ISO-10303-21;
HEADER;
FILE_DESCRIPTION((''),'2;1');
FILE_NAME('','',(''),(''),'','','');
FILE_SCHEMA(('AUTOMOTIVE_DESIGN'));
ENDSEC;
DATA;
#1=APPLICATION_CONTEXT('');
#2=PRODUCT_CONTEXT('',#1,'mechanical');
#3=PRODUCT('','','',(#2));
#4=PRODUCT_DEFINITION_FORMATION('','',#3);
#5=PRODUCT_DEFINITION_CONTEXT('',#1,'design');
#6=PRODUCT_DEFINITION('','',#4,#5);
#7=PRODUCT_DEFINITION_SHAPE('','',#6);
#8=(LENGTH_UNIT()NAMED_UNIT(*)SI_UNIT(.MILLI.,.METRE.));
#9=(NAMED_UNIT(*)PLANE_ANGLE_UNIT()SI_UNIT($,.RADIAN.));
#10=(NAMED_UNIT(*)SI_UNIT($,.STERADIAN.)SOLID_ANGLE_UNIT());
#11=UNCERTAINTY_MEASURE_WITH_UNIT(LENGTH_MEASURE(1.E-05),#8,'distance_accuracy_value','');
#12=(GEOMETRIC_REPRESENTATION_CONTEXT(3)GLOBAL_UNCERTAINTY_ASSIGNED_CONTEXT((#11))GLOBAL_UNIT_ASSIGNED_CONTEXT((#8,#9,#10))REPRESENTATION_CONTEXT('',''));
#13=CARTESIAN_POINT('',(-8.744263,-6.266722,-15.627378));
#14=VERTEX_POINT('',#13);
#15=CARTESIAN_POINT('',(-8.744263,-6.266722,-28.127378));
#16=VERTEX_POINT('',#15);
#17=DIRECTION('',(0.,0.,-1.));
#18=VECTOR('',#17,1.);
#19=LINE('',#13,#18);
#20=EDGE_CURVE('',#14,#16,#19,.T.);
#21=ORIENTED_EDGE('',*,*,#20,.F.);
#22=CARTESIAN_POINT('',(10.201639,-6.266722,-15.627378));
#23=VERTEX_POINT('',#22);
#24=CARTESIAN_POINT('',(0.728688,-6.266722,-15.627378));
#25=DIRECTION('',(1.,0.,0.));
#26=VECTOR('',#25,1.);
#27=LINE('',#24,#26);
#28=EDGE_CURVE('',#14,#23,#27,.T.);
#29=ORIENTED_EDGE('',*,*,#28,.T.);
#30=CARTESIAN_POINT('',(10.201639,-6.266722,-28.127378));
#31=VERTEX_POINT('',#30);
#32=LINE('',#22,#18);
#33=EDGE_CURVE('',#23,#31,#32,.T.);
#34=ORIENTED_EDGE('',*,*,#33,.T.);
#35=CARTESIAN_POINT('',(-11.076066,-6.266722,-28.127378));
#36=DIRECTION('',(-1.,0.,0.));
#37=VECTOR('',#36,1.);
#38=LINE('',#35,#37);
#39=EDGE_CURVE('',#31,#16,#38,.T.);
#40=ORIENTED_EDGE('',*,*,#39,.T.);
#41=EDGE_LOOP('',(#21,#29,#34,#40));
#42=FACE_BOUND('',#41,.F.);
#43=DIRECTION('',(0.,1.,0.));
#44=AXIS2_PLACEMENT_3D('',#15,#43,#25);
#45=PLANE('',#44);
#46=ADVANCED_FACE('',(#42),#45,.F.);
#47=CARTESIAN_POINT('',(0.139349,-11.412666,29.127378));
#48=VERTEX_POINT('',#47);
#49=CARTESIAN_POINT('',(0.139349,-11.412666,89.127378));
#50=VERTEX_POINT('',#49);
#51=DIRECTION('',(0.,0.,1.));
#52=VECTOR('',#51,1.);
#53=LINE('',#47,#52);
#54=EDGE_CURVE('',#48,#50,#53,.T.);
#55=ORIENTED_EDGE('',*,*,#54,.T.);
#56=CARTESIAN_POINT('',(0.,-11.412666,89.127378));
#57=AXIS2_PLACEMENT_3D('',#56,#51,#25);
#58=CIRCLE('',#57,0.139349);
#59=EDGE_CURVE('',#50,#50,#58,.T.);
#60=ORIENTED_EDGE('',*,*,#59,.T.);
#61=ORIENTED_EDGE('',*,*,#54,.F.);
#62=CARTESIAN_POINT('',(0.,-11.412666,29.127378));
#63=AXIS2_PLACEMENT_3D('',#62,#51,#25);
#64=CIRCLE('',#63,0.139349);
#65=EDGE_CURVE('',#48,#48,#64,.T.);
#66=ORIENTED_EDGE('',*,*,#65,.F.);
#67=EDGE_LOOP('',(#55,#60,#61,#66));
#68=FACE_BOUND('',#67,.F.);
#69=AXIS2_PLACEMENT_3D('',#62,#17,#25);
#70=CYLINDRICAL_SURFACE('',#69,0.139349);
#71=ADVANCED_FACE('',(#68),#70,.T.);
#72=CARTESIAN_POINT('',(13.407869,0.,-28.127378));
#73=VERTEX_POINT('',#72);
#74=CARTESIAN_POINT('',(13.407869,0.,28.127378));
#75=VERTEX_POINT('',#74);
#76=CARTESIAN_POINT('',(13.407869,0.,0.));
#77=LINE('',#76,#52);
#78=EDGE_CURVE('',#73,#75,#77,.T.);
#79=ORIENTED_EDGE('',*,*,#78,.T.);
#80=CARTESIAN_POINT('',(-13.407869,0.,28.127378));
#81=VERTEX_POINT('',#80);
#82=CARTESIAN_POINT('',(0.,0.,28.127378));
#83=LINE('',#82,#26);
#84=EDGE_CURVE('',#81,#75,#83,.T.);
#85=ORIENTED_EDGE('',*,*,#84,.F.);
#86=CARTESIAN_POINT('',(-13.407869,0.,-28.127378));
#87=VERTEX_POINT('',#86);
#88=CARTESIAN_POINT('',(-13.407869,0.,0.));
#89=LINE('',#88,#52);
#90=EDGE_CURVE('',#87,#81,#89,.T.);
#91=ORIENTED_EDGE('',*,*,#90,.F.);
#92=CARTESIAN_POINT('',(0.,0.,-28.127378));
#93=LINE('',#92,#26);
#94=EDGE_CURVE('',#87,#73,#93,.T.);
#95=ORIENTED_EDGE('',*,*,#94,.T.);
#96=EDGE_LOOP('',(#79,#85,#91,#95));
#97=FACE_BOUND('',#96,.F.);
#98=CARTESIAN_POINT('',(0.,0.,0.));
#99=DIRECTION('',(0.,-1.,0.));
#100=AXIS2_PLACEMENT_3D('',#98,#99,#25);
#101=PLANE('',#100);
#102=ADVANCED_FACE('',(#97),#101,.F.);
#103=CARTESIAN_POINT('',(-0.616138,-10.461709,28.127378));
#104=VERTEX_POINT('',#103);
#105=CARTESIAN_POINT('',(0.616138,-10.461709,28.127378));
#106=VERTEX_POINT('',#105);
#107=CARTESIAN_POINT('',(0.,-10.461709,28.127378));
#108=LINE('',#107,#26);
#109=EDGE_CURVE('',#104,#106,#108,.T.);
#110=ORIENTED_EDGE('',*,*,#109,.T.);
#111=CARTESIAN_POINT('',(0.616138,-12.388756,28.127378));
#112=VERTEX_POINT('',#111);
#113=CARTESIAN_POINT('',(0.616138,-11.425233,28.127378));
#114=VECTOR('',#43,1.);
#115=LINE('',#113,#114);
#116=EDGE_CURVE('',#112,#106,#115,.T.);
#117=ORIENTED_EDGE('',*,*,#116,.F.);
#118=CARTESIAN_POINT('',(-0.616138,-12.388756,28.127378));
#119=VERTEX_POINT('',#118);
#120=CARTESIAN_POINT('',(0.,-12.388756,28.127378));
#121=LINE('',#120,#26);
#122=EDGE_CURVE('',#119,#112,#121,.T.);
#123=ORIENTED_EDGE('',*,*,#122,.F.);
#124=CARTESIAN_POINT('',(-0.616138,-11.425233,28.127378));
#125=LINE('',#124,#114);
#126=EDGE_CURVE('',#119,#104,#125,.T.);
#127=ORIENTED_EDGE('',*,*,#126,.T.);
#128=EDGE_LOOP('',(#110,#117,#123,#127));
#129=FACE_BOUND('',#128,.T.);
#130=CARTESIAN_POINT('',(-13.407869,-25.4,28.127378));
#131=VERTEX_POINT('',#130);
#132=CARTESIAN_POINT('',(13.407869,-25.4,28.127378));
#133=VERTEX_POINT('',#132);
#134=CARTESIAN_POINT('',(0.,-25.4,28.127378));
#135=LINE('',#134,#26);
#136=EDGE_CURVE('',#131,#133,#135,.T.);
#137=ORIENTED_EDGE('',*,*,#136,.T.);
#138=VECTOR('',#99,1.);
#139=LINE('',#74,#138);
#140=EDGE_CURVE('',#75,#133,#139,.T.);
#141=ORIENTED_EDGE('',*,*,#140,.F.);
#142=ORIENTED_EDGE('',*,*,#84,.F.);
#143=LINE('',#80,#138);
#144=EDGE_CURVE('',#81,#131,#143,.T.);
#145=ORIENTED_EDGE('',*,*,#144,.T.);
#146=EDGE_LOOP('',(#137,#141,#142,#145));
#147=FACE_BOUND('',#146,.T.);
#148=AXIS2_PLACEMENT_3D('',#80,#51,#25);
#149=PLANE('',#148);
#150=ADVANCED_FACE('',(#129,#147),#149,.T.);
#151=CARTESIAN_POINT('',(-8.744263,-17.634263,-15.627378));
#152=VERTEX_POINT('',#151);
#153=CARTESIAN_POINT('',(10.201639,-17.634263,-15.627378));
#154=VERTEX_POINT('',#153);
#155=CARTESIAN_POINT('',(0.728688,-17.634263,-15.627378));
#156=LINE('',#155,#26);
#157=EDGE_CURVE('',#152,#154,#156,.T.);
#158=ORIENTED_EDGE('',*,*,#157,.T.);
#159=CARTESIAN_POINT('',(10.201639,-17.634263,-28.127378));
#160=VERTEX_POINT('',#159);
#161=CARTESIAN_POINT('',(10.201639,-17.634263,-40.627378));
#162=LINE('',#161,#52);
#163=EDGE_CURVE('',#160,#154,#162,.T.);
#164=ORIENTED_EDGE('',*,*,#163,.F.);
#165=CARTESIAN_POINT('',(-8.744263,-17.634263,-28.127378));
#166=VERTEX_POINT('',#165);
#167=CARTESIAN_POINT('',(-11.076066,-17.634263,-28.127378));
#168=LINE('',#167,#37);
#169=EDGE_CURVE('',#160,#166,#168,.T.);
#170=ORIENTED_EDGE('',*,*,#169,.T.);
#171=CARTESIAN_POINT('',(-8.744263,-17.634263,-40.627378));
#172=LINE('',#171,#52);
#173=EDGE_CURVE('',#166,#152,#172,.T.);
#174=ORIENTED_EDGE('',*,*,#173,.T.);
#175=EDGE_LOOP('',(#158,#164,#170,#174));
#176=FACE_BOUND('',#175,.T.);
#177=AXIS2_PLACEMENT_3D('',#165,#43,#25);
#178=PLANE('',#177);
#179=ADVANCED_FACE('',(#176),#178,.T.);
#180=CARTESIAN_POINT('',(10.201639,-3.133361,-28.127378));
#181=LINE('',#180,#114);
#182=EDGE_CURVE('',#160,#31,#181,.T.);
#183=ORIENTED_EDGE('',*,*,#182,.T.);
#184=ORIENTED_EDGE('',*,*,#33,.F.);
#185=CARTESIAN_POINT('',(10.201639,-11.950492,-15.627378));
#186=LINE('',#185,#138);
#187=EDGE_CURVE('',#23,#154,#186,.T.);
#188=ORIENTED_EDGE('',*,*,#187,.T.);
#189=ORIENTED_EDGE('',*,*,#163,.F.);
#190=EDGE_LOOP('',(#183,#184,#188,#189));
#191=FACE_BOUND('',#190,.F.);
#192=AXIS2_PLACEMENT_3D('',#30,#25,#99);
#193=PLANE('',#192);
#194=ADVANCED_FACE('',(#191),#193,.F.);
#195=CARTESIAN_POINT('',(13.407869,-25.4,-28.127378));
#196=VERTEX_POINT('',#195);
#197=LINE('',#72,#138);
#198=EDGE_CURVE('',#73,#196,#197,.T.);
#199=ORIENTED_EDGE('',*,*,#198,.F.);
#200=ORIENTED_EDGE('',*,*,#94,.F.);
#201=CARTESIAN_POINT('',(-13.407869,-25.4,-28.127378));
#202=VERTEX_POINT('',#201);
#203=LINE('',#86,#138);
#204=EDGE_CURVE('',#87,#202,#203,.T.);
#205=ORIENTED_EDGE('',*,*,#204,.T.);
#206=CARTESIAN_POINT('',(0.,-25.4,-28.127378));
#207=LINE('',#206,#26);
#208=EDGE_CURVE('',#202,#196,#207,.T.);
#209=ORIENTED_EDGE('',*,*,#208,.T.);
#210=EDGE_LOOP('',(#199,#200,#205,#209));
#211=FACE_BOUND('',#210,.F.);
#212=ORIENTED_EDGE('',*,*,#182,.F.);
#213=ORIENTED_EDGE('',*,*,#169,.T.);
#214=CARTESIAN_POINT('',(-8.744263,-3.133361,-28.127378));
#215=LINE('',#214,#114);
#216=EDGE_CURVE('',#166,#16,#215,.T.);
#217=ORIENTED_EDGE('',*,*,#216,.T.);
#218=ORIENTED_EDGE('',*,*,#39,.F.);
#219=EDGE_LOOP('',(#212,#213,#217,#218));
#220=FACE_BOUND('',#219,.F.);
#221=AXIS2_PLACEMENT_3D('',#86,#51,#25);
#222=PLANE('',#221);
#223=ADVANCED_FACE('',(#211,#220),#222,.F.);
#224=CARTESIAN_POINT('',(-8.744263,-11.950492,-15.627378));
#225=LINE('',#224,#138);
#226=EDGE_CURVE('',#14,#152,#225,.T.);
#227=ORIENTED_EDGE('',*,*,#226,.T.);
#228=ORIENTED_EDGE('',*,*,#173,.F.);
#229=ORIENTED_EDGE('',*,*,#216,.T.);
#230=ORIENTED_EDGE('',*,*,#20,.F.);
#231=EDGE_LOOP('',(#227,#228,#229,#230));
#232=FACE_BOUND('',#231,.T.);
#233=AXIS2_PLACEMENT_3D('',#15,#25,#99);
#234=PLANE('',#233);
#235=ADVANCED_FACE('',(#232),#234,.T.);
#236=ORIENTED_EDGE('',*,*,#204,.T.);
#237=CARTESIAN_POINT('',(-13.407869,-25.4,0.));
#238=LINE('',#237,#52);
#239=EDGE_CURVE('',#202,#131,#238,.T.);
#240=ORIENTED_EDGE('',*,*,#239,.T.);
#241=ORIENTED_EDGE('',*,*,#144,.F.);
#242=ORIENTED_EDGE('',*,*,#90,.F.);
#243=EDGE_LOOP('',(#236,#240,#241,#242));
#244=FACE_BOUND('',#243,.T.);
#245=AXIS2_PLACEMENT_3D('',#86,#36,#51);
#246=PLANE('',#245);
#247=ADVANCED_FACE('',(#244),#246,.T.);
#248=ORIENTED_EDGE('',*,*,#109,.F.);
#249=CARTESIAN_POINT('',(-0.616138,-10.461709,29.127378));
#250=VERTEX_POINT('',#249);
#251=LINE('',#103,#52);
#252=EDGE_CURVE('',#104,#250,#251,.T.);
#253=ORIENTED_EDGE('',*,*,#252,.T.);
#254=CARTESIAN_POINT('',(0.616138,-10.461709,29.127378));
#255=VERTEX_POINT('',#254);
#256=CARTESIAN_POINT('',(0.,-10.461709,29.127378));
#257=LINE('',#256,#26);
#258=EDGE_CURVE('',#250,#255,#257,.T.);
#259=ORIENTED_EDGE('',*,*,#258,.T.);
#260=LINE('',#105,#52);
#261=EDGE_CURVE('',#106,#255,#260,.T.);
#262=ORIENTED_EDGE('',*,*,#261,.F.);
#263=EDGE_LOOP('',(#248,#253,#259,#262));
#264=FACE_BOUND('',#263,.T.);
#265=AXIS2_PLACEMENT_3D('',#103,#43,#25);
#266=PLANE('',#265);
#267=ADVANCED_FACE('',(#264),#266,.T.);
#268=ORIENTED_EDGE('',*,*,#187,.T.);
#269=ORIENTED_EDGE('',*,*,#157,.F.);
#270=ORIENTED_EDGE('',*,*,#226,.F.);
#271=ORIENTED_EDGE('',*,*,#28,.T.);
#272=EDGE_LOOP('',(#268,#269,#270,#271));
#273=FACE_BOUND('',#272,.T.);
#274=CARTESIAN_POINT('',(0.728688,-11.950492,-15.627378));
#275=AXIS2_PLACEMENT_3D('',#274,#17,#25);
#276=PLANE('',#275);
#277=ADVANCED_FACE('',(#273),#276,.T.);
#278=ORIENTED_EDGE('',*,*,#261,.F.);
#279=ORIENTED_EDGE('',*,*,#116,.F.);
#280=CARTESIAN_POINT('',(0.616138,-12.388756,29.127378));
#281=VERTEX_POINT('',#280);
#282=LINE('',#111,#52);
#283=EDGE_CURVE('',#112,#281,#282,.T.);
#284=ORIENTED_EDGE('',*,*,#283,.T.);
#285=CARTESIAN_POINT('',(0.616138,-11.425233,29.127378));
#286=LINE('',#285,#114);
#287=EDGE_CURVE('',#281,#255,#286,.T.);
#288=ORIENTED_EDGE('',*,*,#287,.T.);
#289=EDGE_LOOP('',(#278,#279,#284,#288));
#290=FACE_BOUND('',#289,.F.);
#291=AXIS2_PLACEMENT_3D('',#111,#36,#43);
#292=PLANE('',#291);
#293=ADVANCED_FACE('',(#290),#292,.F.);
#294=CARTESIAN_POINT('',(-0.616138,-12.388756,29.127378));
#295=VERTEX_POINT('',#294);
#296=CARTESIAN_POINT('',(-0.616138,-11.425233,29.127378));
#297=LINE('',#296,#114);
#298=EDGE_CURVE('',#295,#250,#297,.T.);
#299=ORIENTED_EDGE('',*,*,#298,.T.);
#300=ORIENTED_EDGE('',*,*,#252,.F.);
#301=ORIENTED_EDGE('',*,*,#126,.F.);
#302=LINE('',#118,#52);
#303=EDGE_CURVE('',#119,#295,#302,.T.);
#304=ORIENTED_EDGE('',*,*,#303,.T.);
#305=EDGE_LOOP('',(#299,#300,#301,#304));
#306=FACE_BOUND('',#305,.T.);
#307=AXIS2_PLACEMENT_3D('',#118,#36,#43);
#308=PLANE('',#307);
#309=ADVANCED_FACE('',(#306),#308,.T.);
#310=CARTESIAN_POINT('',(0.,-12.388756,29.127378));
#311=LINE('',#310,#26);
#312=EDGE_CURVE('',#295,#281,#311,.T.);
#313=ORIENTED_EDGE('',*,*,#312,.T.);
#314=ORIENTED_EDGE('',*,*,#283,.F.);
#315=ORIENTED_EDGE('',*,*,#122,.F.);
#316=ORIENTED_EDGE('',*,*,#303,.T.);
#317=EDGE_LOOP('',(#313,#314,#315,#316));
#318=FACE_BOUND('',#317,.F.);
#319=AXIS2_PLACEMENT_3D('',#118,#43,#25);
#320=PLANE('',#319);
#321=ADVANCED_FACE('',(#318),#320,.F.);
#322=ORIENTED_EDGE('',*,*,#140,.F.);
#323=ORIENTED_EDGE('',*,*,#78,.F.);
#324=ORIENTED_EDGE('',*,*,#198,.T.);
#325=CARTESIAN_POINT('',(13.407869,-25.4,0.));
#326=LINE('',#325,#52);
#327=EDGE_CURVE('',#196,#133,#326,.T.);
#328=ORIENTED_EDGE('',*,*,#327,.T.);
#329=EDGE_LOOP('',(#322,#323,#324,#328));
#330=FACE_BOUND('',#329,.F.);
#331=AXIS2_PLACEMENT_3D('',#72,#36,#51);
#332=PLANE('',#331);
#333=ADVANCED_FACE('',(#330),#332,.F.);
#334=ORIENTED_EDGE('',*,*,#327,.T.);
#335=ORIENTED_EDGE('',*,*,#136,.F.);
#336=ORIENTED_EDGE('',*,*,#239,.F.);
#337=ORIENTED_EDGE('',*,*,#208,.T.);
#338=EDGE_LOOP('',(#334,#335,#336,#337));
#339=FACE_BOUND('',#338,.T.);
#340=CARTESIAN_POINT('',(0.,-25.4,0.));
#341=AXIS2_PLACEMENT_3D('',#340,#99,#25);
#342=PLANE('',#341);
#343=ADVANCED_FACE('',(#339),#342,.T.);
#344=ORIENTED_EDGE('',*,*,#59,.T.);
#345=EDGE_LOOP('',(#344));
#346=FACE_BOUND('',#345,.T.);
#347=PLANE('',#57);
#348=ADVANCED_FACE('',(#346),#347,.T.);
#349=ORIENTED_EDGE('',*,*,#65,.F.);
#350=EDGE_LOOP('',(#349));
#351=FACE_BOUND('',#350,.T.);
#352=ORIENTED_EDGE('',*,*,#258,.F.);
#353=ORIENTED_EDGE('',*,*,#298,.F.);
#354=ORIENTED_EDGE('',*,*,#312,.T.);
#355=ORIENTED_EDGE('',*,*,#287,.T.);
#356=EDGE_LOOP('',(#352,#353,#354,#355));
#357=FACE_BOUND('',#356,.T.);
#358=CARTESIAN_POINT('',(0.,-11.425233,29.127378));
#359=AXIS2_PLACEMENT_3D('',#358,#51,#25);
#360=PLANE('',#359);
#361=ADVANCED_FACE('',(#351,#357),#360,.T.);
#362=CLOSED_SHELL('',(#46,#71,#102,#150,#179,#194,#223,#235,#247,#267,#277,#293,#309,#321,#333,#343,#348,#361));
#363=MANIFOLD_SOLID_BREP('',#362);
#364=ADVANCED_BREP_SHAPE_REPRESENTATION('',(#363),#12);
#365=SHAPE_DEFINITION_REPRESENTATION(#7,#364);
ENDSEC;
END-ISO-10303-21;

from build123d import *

# Parameters (mm, degrees)
F0_W     = 26.815738529
F0_H     = 56.2547557056
F1_DEPTH = 25.4
F2_W     = 18.9459016547
F2_H     = 11.3675417379
F3_DEPTH = 12.5
F4_W     = 1.2322755065
F4_H     = 1.9270461053
F5_DEPTH = 1
F6_R     = 0.1393490387
F7_DEPTH = 60


# Not quite as in the source:
# - a feature names something its author has since deleted; it is built from what else it names


with BuildPart() as f1:
    # F0 (on Front) → F1 (new body)
    with BuildSketch(Plane.XZ):
        Rectangle(F0_W, F0_H)
    extrude(amount=F1_DEPTH)

    # F2 (on face) → F3 (cut, symmetric)
    with BuildSketch(Plane(origin=(0, 0, -28.1273778528), x_dir=(1, 0, 0), z_dir=(0, 0, -1))):
        with Locations((0.7286877371, 11.9504923932)):
            Rectangle(F2_W, F2_H)
    extrude(amount=F3_DEPTH, both=True, mode=Mode.SUBTRACT)

    # F4 (on face) → F5 (join)
    with BuildSketch(Plane.XY.offset(28.1273778528)):
        with Locations((0, -11.4252325147)):
            Rectangle(F4_W, F4_H)
    extrude(amount=F5_DEPTH)

    # F6 (on face) → F7 (join)
    with BuildSketch(Plane.XY.offset(29.1273778528)):
        with Locations((0, -11.4126661792)):
            Circle(F6_R)
    extrude(amount=F7_DEPTH)


solid = f1.part
